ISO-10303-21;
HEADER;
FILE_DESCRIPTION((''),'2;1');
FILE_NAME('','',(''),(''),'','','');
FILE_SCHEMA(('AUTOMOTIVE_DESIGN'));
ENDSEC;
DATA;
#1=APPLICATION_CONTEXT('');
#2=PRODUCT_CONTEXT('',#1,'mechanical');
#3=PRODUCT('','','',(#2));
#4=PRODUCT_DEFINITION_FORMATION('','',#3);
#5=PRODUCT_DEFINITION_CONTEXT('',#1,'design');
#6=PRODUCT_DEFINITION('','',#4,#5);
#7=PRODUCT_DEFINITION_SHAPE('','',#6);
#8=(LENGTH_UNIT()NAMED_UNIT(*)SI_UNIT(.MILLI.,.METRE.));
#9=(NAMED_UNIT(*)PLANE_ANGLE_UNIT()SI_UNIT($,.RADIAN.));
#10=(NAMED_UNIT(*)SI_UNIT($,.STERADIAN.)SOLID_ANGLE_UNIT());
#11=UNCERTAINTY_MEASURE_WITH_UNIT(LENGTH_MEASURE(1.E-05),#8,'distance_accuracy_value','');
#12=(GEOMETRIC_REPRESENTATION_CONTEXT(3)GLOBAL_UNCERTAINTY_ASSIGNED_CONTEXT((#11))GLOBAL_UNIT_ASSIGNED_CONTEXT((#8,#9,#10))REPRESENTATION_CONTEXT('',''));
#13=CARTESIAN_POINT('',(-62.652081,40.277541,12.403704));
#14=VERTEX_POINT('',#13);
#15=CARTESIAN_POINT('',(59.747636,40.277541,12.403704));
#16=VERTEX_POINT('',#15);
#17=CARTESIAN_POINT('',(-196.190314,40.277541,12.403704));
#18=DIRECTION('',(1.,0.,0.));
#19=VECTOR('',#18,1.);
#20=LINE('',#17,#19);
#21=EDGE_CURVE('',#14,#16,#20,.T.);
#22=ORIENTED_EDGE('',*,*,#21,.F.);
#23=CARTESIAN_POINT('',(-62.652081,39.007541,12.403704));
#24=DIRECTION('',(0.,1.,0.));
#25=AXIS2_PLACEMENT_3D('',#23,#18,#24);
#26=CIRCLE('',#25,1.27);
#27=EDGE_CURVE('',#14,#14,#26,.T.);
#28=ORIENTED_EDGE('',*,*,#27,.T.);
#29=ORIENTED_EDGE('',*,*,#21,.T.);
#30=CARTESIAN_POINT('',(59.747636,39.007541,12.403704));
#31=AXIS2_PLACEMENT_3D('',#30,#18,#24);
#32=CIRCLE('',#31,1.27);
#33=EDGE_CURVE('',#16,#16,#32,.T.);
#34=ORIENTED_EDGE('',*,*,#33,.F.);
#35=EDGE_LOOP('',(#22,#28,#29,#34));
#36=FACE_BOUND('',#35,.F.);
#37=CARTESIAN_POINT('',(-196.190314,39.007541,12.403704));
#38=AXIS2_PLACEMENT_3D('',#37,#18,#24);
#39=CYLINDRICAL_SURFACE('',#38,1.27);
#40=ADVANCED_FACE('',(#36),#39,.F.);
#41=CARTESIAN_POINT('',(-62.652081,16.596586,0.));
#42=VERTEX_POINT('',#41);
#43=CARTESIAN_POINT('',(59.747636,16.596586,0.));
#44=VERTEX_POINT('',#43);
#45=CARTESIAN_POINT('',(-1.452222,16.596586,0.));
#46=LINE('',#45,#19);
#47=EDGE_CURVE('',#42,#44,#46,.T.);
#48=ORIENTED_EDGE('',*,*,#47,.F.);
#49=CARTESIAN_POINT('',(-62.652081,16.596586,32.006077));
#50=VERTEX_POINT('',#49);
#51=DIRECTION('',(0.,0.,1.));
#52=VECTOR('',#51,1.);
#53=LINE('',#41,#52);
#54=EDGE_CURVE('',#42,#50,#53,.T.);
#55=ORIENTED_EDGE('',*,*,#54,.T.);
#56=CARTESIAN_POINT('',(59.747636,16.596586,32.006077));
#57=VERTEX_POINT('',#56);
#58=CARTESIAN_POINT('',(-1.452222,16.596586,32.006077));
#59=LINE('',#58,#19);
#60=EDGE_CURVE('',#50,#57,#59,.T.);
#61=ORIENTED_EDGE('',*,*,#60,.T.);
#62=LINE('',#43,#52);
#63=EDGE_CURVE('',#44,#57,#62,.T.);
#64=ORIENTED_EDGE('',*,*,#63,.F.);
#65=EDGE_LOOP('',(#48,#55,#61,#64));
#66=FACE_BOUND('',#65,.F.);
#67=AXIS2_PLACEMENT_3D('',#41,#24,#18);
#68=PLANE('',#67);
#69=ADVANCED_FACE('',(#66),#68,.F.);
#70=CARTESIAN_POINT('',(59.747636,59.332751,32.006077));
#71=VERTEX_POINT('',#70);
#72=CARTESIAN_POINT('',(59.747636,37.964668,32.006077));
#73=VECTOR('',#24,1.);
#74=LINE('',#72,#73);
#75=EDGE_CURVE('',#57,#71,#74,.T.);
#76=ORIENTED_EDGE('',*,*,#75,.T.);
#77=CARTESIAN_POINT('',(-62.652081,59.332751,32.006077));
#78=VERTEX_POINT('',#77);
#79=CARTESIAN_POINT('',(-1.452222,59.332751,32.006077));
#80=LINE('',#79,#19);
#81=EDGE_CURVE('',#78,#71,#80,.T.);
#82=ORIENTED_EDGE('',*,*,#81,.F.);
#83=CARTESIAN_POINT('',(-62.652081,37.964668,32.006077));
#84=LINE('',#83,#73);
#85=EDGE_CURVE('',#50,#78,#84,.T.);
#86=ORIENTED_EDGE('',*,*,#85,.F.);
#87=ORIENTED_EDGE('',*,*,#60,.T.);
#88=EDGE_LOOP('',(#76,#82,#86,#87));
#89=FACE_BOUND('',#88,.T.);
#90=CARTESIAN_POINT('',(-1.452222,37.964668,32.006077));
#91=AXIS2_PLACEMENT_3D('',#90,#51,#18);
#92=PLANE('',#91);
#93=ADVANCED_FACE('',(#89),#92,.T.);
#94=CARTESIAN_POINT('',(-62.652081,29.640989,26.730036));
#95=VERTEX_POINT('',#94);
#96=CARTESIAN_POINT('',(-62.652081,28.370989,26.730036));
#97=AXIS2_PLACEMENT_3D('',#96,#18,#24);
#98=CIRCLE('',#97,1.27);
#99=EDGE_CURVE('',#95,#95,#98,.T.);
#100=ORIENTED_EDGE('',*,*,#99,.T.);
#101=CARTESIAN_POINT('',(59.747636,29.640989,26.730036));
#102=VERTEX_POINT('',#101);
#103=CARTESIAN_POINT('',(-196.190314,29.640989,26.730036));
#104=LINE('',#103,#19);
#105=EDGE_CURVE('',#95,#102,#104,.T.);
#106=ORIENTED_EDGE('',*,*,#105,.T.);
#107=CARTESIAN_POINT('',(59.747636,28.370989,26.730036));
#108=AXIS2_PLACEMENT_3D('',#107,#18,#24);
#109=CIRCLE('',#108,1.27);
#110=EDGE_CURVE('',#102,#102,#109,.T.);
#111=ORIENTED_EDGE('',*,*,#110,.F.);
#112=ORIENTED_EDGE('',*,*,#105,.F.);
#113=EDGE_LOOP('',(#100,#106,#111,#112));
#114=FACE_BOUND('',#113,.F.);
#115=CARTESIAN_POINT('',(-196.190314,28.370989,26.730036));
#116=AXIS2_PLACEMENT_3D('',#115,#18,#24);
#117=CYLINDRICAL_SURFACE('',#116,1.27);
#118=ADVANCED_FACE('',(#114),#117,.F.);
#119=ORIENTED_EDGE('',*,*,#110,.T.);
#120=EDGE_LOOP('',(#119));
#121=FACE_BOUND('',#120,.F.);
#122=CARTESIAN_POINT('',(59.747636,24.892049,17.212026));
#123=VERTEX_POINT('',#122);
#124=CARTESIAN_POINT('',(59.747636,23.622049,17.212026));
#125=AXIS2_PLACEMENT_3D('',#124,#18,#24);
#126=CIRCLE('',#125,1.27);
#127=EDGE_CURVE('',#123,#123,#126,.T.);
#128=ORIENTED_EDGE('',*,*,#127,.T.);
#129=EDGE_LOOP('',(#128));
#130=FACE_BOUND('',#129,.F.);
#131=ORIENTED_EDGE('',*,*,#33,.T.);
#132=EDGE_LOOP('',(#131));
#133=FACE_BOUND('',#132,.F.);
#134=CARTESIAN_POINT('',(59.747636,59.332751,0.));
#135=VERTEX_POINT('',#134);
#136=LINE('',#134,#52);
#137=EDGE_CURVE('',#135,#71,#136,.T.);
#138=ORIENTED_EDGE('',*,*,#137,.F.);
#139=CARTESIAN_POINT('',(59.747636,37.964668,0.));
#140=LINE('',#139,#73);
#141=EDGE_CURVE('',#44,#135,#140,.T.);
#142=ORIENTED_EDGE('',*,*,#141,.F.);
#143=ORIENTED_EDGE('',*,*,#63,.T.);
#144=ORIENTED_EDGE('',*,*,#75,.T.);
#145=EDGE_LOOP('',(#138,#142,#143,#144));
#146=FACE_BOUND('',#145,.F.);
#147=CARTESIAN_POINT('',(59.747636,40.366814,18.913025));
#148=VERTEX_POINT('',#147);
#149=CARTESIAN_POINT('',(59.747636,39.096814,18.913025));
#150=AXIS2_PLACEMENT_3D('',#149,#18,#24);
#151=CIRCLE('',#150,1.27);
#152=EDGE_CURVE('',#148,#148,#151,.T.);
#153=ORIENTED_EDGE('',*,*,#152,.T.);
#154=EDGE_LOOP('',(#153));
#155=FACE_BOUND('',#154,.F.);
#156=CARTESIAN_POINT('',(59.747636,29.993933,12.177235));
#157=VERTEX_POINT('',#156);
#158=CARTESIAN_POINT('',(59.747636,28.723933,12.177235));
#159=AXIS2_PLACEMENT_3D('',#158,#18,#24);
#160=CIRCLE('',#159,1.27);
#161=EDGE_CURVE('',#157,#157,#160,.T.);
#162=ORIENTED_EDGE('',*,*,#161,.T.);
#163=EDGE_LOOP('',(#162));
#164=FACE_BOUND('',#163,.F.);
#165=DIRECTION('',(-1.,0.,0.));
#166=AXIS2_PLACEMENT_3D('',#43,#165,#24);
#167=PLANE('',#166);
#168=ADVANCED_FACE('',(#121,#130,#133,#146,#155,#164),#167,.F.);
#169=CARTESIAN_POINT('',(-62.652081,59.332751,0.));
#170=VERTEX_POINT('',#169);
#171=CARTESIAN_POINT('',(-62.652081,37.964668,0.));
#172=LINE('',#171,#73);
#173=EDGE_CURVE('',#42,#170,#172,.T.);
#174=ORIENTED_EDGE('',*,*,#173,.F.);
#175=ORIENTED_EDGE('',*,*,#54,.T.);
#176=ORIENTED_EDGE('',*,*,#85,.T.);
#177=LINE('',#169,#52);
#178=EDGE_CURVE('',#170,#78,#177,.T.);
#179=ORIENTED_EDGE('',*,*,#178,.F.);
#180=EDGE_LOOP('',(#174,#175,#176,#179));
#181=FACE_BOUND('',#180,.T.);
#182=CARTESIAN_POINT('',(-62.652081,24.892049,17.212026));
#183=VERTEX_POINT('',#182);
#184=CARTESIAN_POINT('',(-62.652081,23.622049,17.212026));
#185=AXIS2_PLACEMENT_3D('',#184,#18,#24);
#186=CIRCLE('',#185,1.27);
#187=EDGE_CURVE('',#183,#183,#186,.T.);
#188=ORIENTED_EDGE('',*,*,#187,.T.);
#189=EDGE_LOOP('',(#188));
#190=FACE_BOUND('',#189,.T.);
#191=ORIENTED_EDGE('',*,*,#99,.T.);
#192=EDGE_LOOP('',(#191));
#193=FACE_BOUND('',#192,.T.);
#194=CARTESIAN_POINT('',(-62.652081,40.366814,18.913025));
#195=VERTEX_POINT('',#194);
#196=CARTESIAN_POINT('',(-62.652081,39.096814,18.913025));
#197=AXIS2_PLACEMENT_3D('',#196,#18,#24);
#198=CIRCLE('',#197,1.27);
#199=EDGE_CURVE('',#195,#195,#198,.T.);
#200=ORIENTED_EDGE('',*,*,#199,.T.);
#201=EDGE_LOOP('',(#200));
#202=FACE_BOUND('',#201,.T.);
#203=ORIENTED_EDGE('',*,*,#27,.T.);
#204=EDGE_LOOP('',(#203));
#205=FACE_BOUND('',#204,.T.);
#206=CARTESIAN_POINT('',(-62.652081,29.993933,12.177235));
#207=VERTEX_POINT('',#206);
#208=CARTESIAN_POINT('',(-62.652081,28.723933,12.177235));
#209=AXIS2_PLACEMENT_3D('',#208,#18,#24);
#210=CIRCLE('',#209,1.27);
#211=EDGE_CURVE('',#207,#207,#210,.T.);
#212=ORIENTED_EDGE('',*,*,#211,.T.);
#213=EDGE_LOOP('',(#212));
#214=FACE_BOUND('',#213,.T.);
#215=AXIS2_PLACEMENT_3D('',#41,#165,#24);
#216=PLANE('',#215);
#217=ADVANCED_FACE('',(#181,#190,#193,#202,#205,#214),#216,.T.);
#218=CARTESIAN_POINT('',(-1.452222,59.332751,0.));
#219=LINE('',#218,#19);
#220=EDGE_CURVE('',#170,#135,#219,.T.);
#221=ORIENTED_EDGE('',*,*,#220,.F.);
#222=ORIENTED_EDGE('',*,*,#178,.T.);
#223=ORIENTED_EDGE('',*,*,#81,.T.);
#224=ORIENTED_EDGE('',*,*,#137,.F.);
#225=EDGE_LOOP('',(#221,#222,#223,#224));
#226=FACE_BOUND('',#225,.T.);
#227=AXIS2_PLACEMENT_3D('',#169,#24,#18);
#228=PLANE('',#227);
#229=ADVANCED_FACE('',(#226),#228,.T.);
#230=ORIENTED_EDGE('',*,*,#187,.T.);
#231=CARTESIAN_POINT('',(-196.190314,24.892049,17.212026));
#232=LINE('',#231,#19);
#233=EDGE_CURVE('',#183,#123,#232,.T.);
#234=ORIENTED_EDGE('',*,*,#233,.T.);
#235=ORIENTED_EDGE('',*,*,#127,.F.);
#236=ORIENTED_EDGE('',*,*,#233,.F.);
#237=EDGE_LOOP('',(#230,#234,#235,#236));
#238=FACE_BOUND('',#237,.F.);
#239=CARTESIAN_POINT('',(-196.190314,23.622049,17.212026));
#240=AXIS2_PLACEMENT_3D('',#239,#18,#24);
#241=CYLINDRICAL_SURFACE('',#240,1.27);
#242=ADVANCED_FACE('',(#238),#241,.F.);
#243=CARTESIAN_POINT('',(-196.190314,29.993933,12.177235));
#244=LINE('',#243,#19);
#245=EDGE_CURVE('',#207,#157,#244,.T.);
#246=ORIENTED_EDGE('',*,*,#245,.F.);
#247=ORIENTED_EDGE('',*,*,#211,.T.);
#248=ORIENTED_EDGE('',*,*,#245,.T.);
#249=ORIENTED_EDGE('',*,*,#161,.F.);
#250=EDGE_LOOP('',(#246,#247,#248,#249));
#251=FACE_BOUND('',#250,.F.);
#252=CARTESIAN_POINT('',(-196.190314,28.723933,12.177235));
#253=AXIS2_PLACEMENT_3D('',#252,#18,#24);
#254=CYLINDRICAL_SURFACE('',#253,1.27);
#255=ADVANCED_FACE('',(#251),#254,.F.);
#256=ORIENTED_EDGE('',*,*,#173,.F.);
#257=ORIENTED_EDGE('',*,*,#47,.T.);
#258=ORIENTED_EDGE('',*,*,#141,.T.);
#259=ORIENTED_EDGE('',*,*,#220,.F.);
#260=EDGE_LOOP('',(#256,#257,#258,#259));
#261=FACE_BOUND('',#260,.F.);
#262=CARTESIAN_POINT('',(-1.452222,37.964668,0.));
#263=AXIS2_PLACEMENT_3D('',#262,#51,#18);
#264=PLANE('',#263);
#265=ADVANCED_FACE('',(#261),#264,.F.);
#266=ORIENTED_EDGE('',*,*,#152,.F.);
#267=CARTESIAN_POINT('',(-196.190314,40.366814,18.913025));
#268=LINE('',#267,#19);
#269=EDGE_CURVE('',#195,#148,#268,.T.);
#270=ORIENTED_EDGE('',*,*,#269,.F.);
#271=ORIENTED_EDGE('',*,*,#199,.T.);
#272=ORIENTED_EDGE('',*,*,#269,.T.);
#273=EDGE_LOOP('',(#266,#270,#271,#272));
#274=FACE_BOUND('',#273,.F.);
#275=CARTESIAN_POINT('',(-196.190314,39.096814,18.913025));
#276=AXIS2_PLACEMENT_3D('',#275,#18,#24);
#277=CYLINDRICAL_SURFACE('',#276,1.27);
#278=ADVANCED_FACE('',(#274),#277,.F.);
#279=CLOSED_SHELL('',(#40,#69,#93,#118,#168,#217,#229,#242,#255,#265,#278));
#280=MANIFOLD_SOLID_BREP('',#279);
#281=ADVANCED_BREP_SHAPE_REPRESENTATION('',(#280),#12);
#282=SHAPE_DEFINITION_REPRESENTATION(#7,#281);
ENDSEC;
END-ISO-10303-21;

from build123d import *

# Parameters (mm, degrees)
F0_W     = 122.3997175694
F0_H     = 42.7361652255
F1_DEPTH = 32.0060774684
F5_D     = 2.54


# Not quite as in the source:
# - the program builds the solid bodies; features that only make, move or delete a surface that nothing else refers to are left out


with BuildPart() as f1:
    # F0 (on Top) → F1 (new body)
    with BuildSketch(Plane.XY):
        with Locations((-1.4522224665, 37.9646681249)):
            Rectangle(F0_W, F0_H)
    extrude(amount=F1_DEPTH)

    # F5 (through all)
    with Locations(Plane(origin=(-62.6520812511, 0, 0), x_dir=(0, -1, 0), z_dir=(-1, 0, 0))):
        with Locations((-28.3709894866, 26.730036363), (-23.6220490187, 17.2120258212), (-28.7239328027, 12.1772345155), (-39.0075407922, 12.403704226), (-39.0968136489, 18.9130250365)):
            Hole(F5_D / 2)


solid = f1.part
